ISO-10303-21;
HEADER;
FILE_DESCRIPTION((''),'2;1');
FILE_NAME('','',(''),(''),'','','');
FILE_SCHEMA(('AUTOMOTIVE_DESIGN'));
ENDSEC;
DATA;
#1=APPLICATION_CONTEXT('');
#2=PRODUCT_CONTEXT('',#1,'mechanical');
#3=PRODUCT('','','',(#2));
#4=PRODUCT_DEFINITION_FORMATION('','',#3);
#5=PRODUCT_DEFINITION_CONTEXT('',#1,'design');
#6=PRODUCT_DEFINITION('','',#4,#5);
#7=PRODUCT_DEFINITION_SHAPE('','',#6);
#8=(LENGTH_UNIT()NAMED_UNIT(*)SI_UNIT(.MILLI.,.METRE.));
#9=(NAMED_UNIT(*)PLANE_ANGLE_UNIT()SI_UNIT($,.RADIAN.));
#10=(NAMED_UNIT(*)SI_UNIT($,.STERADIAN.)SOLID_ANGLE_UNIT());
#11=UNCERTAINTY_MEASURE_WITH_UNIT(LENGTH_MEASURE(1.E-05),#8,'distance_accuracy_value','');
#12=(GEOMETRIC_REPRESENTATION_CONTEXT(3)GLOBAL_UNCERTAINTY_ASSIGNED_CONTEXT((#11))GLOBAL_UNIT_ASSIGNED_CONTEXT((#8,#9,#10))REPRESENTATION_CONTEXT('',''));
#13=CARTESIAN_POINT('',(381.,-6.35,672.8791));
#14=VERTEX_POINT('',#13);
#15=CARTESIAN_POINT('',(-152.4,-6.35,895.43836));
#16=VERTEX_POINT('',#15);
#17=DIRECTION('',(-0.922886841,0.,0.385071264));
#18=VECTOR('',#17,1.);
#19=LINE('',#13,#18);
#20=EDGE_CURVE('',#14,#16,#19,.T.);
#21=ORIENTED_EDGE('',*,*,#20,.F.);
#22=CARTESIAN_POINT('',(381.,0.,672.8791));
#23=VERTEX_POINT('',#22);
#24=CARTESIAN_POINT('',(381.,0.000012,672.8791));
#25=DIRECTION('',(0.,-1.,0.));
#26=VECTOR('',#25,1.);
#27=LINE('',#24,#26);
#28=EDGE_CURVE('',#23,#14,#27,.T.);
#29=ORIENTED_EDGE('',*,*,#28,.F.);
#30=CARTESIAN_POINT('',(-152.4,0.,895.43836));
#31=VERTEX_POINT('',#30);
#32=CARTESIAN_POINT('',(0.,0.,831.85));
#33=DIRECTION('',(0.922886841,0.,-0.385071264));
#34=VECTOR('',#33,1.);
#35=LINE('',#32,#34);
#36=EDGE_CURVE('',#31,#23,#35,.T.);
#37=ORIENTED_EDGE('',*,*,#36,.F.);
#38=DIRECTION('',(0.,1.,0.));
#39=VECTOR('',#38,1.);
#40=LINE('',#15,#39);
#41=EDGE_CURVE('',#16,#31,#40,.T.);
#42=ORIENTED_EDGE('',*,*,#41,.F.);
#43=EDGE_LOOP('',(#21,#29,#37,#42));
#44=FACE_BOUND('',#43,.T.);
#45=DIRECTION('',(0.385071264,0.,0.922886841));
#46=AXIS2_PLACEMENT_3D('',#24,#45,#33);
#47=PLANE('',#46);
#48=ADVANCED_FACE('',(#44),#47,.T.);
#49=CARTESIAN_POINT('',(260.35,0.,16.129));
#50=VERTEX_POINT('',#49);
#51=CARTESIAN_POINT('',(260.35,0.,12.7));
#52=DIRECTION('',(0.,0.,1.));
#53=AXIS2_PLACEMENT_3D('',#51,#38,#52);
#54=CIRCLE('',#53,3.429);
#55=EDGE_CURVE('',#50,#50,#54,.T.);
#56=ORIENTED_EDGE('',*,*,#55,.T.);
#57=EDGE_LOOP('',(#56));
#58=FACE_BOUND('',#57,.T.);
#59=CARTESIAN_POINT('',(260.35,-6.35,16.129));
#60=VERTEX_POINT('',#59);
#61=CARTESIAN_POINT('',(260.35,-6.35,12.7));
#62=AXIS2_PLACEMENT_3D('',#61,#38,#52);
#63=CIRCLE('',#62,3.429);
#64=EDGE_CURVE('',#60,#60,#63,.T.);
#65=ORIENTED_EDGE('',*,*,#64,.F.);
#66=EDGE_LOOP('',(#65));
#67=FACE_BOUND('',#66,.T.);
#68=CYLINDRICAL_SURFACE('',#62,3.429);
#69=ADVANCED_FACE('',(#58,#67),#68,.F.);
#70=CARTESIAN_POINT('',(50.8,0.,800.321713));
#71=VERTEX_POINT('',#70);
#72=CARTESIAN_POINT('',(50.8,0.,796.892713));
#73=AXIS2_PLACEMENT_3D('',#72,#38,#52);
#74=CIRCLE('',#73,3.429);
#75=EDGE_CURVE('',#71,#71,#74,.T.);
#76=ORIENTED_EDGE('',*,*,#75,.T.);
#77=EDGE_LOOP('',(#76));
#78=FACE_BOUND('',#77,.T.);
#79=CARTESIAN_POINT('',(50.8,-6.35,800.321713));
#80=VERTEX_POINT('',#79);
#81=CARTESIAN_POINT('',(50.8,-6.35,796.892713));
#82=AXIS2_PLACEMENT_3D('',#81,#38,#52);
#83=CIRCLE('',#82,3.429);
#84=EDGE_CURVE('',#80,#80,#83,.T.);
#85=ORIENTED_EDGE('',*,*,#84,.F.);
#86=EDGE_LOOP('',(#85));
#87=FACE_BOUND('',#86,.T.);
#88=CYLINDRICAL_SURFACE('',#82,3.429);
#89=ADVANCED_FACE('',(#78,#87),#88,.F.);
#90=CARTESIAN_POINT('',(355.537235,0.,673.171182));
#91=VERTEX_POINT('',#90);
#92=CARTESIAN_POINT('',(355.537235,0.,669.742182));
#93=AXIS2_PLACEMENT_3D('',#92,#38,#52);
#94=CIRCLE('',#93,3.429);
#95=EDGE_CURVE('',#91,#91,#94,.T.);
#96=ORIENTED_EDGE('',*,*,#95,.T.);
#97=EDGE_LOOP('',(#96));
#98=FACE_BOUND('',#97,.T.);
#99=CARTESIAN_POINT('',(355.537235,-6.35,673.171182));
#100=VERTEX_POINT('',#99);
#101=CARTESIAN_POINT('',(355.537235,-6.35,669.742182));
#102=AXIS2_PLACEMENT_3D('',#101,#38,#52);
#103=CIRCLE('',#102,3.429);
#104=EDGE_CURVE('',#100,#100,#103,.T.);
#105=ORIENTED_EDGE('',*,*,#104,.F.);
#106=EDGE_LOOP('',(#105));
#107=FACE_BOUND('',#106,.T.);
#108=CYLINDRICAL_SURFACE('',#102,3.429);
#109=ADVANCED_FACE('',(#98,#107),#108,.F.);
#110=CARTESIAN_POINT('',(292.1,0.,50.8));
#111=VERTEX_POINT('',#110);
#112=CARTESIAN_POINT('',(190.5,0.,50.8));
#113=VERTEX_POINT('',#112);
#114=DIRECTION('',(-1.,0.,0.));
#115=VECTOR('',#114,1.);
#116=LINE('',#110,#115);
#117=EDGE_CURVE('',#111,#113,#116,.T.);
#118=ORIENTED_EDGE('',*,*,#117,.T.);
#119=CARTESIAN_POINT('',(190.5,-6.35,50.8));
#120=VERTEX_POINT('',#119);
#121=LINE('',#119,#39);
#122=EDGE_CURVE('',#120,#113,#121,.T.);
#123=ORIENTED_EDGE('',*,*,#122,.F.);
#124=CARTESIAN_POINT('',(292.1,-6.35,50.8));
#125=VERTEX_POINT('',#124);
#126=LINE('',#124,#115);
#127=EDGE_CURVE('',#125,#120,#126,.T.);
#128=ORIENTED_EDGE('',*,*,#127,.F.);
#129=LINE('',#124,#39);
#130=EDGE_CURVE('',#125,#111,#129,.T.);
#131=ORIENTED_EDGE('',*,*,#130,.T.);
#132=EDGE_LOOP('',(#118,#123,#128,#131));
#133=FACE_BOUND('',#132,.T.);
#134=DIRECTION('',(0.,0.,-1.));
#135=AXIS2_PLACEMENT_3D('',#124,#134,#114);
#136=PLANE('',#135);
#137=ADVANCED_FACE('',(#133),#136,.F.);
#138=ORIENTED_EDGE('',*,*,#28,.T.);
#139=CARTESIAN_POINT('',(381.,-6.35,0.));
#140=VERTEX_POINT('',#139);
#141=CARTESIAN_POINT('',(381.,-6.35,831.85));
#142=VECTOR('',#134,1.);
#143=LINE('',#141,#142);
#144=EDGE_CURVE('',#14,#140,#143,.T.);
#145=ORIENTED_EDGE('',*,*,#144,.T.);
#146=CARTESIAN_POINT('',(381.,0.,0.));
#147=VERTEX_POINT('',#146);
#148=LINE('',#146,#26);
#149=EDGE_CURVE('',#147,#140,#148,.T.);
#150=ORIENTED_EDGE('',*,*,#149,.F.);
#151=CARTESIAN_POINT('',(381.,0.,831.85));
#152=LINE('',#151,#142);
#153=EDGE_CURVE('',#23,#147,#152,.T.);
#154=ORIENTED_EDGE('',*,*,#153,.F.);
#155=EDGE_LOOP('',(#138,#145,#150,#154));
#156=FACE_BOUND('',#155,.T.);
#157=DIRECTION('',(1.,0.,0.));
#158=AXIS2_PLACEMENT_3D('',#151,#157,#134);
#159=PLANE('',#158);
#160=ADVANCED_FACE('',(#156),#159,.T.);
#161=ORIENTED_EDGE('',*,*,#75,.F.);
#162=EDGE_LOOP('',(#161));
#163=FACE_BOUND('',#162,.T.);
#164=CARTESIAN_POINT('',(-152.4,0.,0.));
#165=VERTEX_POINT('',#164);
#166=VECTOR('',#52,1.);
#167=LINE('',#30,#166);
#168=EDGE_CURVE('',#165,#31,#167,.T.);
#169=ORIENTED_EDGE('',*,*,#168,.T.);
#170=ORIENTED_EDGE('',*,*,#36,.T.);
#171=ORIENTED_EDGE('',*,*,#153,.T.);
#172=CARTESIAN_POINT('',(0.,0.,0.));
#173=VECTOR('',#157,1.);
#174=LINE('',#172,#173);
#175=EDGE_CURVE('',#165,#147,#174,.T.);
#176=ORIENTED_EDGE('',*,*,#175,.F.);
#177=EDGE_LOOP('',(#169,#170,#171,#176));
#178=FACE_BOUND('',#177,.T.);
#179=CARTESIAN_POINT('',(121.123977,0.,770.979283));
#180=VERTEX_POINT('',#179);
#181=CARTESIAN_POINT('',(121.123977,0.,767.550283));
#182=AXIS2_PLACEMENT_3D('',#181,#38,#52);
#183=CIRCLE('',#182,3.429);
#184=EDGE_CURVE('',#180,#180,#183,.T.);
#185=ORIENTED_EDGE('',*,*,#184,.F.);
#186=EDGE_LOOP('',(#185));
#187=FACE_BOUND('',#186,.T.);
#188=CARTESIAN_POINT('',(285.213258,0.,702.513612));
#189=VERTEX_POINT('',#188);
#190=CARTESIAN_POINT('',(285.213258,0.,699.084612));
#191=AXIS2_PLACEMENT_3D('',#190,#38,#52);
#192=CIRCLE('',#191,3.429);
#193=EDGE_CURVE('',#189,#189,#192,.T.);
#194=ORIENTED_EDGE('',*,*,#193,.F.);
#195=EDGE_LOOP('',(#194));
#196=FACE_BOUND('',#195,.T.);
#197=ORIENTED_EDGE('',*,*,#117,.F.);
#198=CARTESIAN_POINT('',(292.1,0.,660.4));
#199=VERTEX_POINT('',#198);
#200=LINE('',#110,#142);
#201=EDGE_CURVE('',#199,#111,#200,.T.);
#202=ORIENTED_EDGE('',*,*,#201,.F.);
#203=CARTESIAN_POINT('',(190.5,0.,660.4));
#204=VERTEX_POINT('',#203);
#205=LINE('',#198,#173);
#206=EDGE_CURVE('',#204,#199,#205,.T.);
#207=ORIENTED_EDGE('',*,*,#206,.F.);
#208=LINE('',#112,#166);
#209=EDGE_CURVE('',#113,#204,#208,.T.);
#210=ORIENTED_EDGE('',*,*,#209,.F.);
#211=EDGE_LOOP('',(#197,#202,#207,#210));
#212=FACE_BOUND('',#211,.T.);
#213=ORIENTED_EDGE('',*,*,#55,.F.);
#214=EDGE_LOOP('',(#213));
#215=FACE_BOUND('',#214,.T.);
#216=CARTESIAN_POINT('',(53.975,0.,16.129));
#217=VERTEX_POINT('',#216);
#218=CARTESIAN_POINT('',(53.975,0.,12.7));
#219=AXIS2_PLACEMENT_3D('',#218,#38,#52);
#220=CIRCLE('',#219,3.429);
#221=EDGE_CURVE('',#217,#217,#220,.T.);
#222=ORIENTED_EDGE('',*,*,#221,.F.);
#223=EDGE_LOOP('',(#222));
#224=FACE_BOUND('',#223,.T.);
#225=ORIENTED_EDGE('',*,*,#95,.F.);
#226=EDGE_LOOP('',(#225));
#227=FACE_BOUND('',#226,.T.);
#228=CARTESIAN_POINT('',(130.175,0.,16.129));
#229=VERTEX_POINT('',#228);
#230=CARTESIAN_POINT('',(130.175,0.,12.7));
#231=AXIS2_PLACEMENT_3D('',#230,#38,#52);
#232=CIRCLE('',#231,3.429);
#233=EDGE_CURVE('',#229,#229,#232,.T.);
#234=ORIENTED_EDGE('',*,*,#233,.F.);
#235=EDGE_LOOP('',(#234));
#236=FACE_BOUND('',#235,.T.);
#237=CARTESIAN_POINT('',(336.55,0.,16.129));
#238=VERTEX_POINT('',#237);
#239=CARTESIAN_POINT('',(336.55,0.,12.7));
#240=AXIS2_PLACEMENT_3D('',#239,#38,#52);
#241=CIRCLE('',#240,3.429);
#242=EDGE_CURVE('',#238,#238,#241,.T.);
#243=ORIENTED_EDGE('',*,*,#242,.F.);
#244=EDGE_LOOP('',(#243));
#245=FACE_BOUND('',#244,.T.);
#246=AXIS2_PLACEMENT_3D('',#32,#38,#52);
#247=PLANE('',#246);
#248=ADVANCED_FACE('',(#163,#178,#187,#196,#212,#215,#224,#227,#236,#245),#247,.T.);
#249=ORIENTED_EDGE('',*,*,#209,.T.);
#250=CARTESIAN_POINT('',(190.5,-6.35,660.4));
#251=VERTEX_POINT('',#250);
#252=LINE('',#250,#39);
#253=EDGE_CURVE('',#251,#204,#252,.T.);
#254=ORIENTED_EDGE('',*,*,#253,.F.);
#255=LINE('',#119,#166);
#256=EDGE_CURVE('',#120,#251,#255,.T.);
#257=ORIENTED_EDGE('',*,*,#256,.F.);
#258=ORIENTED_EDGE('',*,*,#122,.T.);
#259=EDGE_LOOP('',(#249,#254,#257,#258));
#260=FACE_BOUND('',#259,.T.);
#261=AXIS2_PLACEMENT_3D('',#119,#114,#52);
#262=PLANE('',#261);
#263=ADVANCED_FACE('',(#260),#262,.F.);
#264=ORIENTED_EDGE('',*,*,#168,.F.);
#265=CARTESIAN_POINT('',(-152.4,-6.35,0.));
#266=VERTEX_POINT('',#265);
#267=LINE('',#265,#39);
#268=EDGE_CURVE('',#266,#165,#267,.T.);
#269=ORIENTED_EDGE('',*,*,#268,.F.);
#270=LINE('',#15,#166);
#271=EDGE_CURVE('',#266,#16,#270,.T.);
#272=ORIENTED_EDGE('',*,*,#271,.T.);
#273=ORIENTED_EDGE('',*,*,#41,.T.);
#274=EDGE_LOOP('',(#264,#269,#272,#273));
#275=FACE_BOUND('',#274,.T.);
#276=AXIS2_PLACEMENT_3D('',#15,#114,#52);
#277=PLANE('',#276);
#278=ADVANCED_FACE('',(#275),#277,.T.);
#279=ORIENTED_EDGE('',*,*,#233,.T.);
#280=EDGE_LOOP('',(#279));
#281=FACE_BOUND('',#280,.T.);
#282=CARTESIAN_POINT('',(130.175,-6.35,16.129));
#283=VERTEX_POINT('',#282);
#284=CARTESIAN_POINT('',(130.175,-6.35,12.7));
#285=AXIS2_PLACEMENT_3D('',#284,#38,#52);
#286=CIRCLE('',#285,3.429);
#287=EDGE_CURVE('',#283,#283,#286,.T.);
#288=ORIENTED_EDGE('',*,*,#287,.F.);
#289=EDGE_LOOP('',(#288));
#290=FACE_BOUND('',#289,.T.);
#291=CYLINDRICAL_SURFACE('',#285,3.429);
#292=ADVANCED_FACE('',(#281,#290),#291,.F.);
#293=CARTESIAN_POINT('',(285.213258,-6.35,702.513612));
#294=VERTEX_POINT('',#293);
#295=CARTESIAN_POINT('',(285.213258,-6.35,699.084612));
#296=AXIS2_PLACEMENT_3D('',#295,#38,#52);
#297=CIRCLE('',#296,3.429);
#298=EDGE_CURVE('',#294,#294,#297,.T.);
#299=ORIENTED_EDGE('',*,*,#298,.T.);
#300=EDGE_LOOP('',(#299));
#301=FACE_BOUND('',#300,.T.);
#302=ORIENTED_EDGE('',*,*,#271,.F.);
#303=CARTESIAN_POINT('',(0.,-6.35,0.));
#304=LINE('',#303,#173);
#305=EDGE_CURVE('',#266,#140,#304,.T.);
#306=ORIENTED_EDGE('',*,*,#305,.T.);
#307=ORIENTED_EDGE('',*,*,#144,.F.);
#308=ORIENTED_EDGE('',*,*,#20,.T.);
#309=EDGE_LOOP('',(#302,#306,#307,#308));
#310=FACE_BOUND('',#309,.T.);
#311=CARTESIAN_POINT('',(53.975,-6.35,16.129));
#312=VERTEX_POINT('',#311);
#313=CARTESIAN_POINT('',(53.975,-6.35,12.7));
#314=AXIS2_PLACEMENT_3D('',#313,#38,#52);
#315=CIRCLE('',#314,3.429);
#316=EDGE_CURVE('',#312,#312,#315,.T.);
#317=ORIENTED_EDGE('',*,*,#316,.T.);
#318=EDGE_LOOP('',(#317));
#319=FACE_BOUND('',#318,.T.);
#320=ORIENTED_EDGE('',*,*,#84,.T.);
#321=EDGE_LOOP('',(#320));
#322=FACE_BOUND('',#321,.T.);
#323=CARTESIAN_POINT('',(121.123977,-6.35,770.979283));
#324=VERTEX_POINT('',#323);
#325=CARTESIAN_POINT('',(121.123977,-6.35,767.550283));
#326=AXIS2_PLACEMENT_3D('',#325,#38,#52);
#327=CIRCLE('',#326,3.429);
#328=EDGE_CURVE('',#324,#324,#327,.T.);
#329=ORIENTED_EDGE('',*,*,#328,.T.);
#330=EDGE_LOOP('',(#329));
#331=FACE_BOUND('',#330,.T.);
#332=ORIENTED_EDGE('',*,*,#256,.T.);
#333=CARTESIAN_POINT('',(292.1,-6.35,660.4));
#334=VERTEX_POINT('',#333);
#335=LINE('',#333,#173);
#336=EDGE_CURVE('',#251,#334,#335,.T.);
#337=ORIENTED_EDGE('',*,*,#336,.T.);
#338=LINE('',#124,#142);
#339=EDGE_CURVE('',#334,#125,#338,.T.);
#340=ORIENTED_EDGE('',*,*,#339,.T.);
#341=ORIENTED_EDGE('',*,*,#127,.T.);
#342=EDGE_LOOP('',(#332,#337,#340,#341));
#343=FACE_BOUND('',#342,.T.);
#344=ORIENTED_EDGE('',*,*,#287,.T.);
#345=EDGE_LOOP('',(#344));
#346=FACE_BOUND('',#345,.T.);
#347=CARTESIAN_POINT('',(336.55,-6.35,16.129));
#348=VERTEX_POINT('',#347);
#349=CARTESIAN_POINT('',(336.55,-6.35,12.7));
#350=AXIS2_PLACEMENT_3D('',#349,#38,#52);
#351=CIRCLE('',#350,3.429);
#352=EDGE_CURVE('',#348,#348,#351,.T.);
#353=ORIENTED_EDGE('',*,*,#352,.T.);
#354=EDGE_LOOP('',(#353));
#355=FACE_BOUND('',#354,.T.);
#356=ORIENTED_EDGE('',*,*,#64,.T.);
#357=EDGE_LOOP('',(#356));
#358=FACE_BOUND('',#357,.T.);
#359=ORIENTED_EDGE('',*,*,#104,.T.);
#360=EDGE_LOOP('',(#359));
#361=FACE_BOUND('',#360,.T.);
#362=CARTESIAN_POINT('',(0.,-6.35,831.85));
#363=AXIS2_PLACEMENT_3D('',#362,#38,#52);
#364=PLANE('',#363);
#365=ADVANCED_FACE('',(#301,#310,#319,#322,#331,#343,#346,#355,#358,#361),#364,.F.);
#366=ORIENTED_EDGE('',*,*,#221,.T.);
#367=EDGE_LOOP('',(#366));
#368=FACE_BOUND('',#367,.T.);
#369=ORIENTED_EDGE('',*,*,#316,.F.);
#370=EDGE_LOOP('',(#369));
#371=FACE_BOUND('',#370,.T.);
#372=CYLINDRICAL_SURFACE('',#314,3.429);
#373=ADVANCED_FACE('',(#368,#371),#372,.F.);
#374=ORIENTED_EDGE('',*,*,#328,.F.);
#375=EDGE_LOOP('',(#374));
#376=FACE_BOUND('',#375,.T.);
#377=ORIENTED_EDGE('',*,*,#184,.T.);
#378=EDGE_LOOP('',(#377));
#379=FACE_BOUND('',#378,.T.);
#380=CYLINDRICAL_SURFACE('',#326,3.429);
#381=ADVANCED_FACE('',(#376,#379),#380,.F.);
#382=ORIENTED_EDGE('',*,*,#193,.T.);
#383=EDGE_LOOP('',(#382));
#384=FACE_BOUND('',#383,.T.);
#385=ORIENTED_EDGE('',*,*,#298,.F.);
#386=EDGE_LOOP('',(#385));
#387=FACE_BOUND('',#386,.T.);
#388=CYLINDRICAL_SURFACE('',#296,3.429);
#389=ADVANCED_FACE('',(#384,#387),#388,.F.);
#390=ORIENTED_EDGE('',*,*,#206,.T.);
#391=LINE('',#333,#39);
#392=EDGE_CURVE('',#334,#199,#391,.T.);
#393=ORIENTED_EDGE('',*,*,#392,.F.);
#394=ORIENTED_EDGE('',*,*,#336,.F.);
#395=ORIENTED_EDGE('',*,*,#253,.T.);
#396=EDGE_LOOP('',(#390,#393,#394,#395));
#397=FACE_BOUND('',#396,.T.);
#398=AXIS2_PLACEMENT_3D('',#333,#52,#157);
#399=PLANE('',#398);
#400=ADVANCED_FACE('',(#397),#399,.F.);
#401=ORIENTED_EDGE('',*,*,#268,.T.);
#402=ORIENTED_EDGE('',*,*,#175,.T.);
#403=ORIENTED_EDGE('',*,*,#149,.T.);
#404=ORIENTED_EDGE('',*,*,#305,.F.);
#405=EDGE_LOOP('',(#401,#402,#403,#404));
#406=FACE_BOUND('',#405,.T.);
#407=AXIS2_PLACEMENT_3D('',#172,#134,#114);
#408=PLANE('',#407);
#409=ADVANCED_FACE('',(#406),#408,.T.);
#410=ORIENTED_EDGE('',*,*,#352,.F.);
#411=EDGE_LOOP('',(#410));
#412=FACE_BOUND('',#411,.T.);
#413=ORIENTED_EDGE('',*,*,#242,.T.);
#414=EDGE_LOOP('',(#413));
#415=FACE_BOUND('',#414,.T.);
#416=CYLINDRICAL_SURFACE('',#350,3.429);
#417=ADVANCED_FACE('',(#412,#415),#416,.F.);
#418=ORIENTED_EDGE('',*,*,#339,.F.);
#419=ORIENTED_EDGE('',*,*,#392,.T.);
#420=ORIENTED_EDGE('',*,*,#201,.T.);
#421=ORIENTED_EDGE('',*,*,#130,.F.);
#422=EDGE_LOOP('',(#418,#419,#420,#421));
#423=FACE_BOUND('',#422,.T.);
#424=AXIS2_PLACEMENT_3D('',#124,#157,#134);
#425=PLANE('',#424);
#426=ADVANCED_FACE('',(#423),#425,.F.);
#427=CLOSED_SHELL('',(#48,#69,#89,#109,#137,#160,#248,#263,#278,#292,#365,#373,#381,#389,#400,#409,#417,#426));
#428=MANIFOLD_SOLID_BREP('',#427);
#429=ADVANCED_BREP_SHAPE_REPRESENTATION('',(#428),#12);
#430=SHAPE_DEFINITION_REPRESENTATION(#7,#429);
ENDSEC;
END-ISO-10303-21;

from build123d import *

# Parameters (mm, degrees)
SKETCH1_W               = 381
SKETCH1_H               = 6.35
BASE_FLANGE1_DEPTH      = 831.85
CUT_EXTRUDE1_DEPTH      = 915.973084304
CUT_EXTRUDE1_DEPTH_BACK = 6.35
SKETCH9_R               = 3.429
CUT_EXTRUDE2_DEPTH      = 6.35
SKETCH10_R              = 3.429
CUT_EXTRUDE3_DEPTH      = 6.35
SKETCH11_W              = 101.6
SKETCH11_H              = 609.6
CUT_EXTRUDE4_DEPTH      = 6.35
BOSS_EXTRUDE1_START     = -6.35
BOSS_EXTRUDE1_DEPTH     = 6.35


# Sheet-metal steps are written as plain solids
with BuildPart() as part:
    # Sketch1 → Base-Flange1 (new body)
    with BuildSketch(Plane.XY):
        with Locations((190.5, -3.175)):
            Rectangle(SKETCH1_W, SKETCH1_H)
    extrude(amount=BASE_FLANGE1_DEPTH)

    # Sketch8 → Cut-Extrude1 (cut, two sides: drawn at the far end of the back side and taken through both)
    with BuildSketch(Plane(origin=(0, 0, 0), x_dir=(1, 0, 0), z_dir=(0, 1, 0)).offset(-CUT_EXTRUDE1_DEPTH_BACK)):
        Polygon((381, -672.879100114), (0, -831.85), (381, -831.85), align=None)
    extrude(amount=CUT_EXTRUDE1_DEPTH + CUT_EXTRUDE1_DEPTH_BACK, mode=Mode.SUBTRACT)

    # Sketch9 → Cut-Extrude2 (cut)
    with BuildSketch(Plane(origin=(0, 0, 0), x_dir=(1, 0, 0), z_dir=(0, 1, 0))):
        with Locations(Location((130.175, -12.7, 0), (0, 0, 270))):
            Circle(SKETCH9_R)
        with Locations(Location((53.975, -12.7, 0), (0, 0, 270))):
            Circle(SKETCH9_R)
    extrude(amount=-CUT_EXTRUDE2_DEPTH, mode=Mode.SUBTRACT)

    # Sketch10 → Cut-Extrude3 (cut)
    with BuildSketch(Plane(origin=(0, 0, 0), x_dir=(1, 0, 0), z_dir=(0, 1, 0))):
        with Locations(Location((50.8, -796.892712954, 0), (0, 0, 270))):
            Circle(SKETCH10_R)
        with Locations(Location((121.123977295, -767.550282628, 0), (0, 0, 270))):
            Circle(SKETCH10_R)
        with Locations(Location((285.21325765, -699.084611868, 0), (0, 0, 270))):
            Circle(SKETCH10_R)
        with Locations(Location((355.537234945, -669.742181542, 0), (0, 0, 270))):
            Circle(SKETCH10_R)
        with Locations(Location((260.35, -12.7, 0), (0, 0, 270))):
            Circle(SKETCH10_R)
        with Locations(Location((336.55, -12.7, 0), (0, 0, 270))):
            Circle(SKETCH10_R)
    extrude(amount=-CUT_EXTRUDE3_DEPTH, mode=Mode.SUBTRACT)

    # Sketch11 → Cut-Extrude4 (cut)
    with BuildSketch(Plane(origin=(0, 0, 0), x_dir=(1, 0, 0), z_dir=(0, 1, 0))):
        with Locations((241.3, -355.6)):
            Rectangle(SKETCH11_W, SKETCH11_H)
    extrude(amount=-CUT_EXTRUDE4_DEPTH, mode=Mode.SUBTRACT)

    # Sketch12 → Boss-Extrude1 (add)
    with BuildSketch(Plane(origin=(0, 0, 0), x_dir=(1, 0, 0), z_dir=(0, 1, 0)).offset(BOSS_EXTRUDE1_START)):
        Polygon((0, -831.85), (-152.4, -895.438359954), (-152.4, 0), (0, 0), align=None)
    extrude(amount=BOSS_EXTRUDE1_DEPTH)


solid = part.part
